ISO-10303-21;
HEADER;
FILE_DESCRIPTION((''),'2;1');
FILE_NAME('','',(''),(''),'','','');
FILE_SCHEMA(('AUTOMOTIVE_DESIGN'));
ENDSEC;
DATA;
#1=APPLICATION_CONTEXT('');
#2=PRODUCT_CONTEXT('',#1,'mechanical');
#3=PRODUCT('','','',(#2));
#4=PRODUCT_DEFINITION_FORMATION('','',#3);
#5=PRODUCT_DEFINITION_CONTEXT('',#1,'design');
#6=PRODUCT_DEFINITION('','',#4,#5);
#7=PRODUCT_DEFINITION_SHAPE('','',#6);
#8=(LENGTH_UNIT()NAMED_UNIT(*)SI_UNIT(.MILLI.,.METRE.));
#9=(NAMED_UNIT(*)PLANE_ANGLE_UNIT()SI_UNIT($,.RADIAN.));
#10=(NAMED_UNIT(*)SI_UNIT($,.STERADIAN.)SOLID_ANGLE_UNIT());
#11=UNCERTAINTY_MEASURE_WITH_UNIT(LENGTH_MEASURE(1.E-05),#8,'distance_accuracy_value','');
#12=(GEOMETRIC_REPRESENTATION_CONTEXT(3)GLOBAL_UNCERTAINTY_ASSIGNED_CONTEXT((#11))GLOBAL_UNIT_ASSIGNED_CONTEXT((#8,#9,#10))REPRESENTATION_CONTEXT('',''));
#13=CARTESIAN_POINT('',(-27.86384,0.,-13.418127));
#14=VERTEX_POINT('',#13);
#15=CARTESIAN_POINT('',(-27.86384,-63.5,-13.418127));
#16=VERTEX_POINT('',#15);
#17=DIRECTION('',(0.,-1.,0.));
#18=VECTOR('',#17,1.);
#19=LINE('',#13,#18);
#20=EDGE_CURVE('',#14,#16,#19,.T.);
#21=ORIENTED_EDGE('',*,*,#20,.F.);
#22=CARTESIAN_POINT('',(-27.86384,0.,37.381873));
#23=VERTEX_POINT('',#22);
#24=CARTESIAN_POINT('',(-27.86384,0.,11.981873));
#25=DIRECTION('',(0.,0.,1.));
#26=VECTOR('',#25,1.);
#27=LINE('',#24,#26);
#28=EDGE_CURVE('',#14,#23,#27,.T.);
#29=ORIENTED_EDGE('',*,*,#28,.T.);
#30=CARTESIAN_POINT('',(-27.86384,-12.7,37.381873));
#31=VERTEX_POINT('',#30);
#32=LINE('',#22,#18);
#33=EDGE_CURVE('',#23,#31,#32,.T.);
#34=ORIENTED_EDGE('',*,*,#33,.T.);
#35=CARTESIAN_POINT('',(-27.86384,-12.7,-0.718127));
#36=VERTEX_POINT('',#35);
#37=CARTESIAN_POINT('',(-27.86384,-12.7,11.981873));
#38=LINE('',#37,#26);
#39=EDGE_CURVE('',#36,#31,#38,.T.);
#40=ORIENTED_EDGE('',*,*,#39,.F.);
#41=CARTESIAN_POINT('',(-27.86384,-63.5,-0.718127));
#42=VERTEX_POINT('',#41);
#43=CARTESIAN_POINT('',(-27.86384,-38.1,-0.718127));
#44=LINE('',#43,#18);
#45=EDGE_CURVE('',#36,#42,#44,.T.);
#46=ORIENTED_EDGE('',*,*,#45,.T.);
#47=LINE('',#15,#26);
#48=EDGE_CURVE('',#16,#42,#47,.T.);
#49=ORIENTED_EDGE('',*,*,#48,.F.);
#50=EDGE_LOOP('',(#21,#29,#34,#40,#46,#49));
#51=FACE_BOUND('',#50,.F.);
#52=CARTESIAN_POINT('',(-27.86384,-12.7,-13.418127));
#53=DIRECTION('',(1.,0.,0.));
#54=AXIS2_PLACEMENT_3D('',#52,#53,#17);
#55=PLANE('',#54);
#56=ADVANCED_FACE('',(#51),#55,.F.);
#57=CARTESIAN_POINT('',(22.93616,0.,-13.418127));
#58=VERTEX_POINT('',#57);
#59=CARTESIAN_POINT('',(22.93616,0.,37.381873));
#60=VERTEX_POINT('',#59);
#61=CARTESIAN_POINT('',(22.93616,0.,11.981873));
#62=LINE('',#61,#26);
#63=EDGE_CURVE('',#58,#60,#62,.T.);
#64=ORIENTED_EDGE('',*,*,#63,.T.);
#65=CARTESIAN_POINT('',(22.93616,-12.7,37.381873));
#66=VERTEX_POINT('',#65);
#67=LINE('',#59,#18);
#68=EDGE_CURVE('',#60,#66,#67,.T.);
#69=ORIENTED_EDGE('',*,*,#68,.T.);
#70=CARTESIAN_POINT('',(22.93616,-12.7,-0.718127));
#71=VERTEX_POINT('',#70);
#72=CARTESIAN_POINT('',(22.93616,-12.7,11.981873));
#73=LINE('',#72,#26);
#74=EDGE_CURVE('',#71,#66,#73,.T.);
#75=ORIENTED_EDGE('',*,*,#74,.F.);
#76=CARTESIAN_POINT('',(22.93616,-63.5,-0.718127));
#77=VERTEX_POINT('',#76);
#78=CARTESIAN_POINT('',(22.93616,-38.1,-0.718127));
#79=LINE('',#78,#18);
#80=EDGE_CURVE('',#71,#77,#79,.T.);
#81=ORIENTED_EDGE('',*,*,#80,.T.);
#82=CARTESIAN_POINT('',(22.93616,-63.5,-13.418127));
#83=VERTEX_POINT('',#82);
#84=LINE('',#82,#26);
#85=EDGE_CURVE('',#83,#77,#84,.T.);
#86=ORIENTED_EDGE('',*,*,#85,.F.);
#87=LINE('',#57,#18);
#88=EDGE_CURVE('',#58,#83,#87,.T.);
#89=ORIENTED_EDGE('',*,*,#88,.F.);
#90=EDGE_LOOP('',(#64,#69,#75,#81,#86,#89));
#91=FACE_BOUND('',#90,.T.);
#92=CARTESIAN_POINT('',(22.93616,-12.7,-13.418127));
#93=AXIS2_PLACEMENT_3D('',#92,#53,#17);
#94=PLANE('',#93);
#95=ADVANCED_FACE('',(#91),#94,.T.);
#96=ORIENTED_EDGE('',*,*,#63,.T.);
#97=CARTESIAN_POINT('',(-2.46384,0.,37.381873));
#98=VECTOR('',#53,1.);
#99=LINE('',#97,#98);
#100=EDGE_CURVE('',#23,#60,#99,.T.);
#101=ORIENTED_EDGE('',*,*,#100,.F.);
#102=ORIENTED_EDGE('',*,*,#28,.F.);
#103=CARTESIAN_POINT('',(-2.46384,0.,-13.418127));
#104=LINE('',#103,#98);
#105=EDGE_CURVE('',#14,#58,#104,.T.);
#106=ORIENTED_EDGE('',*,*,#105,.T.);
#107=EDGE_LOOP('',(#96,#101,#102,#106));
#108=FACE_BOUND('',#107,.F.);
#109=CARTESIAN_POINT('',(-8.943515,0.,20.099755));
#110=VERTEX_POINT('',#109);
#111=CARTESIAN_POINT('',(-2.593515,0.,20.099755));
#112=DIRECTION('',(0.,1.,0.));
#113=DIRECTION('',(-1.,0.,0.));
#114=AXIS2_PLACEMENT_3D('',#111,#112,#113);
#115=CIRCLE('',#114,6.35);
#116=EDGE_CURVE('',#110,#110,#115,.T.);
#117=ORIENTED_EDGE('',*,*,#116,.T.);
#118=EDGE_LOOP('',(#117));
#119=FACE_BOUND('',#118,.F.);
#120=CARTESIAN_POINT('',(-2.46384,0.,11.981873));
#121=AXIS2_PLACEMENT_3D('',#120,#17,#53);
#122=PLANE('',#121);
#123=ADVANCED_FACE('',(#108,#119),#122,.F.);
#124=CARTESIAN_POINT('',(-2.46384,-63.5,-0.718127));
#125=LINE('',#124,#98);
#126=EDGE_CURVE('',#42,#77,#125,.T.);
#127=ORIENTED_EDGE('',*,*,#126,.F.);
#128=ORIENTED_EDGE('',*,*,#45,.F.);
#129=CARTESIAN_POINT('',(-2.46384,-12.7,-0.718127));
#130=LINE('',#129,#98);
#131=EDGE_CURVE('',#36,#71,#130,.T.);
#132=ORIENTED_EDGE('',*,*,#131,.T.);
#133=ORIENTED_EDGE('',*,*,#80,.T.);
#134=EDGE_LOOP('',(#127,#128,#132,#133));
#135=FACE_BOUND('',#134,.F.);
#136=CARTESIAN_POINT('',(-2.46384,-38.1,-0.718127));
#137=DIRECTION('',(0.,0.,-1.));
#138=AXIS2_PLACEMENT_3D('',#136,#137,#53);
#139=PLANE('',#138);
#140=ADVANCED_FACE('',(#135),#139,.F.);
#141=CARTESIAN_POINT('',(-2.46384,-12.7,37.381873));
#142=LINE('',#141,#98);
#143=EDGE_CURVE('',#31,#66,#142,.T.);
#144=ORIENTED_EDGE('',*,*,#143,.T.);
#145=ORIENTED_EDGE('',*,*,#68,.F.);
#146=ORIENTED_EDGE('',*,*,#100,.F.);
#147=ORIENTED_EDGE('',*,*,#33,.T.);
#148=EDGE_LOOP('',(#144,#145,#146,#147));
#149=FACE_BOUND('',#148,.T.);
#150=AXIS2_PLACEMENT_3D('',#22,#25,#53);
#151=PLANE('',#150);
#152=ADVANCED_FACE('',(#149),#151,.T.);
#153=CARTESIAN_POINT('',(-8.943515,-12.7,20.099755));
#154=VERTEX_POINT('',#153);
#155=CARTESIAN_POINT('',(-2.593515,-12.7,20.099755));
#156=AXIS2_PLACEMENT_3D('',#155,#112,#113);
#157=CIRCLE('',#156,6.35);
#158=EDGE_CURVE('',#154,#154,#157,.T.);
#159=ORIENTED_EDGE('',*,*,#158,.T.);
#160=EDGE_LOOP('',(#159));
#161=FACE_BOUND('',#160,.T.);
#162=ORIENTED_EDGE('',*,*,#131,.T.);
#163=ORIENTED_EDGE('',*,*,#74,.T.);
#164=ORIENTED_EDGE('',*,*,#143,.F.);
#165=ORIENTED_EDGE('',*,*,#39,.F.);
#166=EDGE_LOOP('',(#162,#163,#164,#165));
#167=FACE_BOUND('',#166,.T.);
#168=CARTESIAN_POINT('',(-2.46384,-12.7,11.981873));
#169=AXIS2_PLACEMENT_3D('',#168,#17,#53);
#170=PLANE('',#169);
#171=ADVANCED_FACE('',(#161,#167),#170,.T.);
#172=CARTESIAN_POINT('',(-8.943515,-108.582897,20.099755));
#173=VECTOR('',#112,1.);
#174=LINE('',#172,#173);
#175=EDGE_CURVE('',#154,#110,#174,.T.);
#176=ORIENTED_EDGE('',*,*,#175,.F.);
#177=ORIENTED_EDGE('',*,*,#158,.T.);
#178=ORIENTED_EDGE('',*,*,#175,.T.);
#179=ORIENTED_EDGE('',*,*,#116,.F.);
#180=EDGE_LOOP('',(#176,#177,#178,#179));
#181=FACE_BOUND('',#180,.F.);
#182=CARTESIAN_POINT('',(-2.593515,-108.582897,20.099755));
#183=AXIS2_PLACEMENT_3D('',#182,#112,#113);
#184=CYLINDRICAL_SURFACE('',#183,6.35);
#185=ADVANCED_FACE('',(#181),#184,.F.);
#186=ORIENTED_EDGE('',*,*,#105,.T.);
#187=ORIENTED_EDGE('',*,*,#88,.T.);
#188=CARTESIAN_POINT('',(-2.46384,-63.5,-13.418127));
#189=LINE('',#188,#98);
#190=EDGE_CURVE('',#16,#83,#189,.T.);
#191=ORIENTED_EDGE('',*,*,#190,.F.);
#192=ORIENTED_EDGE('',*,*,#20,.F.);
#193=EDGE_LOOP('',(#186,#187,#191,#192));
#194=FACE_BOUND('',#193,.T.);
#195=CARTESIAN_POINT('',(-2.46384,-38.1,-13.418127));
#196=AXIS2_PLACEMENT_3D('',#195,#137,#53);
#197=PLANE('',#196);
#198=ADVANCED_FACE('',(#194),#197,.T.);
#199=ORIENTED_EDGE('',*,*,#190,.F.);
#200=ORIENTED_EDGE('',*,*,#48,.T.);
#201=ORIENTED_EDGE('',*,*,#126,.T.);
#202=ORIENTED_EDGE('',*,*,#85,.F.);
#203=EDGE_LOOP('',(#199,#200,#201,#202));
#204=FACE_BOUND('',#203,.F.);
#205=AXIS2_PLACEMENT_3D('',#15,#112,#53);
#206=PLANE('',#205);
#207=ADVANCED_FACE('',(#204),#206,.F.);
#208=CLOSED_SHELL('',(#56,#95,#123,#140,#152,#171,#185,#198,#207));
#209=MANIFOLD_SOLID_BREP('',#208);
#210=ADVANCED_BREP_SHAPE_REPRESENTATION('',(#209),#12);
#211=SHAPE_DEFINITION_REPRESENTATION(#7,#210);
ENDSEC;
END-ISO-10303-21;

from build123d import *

# Parameters (mm, degrees)
F0_W     = 50.8
F0_H     = 50.8
F1_DEPTH = 12.7
F2_W     = 50.8
F2_H     = 50.8
F3_DEPTH = 12.7
F6_D     = 12.7


with BuildPart() as f1:
    # F0 (on Front) → F1 (new body)
    with BuildSketch(Plane.XZ):
        with Locations((-2.4638399482, 11.9818727014)):
            Rectangle(F0_W, F0_H)
    extrude(amount=F1_DEPTH)

    # F2 (on face) → F3 (join)
    with BuildSketch(Plane(origin=(0, 0, -13.4181272986), x_dir=(1, 0, 0), z_dir=(0, 0, -1))):
        with Locations((-2.4638399482, 38.1)):
            Rectangle(F2_W, F2_H)
    extrude(amount=-F3_DEPTH)

    # F6 (through all)
    with Locations(Plane.XZ.offset(12.7)):
        with Locations((-2.5935145095, 20.0997553766)):
            Hole(F6_D / 2)


solid = f1.part
